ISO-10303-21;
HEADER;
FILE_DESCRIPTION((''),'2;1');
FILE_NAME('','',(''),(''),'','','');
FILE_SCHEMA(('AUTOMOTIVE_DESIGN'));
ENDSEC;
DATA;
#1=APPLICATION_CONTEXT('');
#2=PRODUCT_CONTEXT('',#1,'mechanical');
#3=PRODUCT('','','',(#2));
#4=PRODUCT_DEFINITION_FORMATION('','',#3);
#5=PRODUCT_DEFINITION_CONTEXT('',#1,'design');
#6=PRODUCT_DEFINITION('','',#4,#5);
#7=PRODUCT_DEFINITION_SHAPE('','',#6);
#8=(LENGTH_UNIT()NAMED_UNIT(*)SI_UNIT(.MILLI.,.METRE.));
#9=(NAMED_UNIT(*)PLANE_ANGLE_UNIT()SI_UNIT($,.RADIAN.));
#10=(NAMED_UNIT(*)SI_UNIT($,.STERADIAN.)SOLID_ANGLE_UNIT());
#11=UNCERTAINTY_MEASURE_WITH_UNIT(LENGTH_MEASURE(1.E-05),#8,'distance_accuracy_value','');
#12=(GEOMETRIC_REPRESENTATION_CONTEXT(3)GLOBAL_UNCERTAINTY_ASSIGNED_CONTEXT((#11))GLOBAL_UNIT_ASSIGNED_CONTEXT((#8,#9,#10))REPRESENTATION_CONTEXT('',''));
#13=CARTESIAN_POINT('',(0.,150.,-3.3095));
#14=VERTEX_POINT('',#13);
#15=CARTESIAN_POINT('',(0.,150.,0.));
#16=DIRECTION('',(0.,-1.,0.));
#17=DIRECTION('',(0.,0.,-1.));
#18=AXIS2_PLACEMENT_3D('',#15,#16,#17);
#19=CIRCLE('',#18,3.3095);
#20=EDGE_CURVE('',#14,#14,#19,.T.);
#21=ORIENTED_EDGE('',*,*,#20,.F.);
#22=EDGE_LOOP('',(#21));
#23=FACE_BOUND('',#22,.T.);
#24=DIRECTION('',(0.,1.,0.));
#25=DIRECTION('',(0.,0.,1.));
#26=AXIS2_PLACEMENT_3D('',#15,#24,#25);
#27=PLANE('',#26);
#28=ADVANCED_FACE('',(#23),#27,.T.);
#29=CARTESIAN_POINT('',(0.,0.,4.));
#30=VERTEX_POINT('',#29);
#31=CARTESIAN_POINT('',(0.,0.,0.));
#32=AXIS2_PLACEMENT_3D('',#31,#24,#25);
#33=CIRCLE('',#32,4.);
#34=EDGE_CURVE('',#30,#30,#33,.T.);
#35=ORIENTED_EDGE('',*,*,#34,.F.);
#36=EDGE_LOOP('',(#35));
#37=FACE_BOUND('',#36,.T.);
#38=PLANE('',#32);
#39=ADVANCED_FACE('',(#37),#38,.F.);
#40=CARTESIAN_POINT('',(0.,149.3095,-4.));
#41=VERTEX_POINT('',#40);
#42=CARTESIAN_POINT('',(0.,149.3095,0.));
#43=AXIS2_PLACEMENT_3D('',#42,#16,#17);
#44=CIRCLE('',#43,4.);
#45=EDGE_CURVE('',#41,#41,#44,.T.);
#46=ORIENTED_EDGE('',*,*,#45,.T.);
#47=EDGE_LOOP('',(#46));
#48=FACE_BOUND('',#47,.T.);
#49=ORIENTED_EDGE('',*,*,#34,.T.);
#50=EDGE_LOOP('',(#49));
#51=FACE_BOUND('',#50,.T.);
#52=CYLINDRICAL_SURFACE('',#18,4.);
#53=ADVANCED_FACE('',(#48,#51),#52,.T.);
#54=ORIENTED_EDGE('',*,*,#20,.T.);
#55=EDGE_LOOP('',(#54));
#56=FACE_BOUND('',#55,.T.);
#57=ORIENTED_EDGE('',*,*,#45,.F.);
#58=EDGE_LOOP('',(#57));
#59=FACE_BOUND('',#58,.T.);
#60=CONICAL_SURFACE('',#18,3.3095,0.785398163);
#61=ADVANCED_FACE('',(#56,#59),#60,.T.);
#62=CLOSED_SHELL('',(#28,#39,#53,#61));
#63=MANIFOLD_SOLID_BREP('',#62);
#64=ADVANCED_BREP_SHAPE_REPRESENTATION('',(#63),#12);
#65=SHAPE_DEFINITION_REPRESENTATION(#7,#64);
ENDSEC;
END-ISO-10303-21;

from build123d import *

# Parameters (mm, degrees)
SCHIZZO1_R                   = 4
ESTRUSIONE_ESTRUSIONE1_DEPTH = 150


# Read off the part's stored shape, not the designer's step: M8 Filettature a macchina Borchia1
with BuildPart() as part:
    # Schizzo1 → Estrusione-Estrusione1 (new body)
    with BuildSketch(Plane(origin=(0, 0, 0), x_dir=(1, 0, 0), z_dir=(0, 1, 0))):
        with Locations(Location((0, 0, 0), (0, 0, 270))):
            Circle(SCHIZZO1_R)
    extrude(amount=ESTRUSIONE_ESTRUSIONE1_DEPTH)

    # M8 Filettature a macchina Borchia1 outli → M8 Filettature a macchina Borchia1 (revolve, cut)
    with BuildSketch(Plane.XY):
        Polygon((4, 150), (3.3095, 150), (4, 149.3095), align=None)
    revolve(axis=Axis((0, 0, 0), (0, 1, 0)), mode=Mode.SUBTRACT)


solid = part.part
